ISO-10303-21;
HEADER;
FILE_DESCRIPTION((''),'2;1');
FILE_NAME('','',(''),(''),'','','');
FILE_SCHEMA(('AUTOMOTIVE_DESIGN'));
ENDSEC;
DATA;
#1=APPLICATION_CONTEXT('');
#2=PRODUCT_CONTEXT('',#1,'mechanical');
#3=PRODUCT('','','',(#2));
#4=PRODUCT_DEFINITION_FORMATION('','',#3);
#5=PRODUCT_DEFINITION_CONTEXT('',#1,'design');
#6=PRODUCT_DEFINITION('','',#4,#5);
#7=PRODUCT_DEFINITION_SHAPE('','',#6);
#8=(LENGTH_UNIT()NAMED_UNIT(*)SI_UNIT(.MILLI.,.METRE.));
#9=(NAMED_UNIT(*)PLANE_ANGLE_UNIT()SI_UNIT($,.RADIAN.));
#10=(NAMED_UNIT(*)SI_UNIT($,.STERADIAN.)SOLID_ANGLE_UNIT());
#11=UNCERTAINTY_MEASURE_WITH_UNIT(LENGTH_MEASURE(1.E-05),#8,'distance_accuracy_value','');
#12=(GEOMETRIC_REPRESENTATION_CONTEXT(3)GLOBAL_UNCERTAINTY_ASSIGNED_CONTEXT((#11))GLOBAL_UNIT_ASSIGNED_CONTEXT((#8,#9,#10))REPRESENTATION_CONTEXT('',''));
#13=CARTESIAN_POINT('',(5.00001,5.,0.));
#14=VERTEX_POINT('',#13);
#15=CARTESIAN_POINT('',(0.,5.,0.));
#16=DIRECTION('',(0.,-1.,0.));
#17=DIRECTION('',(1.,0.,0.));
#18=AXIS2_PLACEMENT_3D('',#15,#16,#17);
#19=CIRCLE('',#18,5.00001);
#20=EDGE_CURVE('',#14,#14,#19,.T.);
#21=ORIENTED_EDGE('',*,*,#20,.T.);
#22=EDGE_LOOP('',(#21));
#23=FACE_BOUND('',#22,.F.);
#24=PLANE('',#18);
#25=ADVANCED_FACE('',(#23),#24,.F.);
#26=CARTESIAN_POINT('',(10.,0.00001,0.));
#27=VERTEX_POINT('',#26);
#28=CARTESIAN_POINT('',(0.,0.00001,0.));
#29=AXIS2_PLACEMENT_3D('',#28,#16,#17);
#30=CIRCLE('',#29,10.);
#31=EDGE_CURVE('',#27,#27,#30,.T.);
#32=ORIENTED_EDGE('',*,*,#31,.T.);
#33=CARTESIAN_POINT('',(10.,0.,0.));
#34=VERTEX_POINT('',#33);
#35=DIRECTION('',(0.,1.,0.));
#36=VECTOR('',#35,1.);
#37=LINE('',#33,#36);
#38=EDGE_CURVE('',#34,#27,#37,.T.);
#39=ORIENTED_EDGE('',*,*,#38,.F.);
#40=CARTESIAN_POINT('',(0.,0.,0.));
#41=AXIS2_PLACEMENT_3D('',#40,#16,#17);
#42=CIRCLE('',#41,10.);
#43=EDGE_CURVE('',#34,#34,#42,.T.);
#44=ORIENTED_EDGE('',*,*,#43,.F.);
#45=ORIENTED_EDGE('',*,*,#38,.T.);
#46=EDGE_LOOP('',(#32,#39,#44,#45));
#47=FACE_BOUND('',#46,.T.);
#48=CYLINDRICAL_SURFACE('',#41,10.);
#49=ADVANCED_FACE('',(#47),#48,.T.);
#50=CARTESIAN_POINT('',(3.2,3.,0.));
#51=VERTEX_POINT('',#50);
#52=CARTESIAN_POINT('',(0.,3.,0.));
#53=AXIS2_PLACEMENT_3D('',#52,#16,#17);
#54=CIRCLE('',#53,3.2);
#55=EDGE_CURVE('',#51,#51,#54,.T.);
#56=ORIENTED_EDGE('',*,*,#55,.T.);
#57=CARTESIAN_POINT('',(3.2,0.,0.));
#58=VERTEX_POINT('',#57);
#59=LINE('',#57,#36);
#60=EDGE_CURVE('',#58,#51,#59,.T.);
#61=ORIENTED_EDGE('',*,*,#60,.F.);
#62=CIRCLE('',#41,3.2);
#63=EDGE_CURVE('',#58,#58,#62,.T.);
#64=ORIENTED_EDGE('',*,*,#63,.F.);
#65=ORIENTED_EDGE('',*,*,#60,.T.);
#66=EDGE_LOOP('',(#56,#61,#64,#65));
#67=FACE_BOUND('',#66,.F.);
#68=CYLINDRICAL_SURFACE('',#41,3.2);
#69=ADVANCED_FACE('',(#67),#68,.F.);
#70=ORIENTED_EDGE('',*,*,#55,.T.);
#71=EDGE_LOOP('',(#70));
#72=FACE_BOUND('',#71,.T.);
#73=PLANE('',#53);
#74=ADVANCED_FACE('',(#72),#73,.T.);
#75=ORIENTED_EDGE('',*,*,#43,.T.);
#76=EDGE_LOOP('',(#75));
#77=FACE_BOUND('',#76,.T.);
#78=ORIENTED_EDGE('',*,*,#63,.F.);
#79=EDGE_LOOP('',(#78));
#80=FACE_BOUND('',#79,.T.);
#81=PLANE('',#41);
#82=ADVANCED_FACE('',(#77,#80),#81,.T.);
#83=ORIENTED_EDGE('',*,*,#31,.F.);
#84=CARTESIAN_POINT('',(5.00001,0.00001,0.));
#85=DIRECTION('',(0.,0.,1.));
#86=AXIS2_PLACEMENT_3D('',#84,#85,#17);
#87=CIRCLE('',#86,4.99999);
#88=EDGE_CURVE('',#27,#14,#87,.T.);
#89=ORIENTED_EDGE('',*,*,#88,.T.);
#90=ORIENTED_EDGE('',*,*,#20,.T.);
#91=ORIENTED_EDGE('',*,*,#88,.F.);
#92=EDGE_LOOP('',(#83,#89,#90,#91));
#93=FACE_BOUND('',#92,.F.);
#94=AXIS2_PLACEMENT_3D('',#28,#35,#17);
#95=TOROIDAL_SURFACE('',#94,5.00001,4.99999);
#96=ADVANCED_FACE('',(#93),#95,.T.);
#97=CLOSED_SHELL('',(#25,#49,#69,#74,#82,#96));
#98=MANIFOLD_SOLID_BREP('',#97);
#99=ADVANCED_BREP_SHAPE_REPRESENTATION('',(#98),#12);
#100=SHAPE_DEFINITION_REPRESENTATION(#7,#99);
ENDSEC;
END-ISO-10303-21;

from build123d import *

# Parameters (mm, degrees)
F0_R     = 10
F1_DEPTH = 5
F2_R     = 4.99999
F3_R     = 3.2
F4_DEPTH = 3


# Not quite as in the source:
# - a fillet or chamfer is up to 0.001 mm smaller than in the source, because OpenCascade refuses the exact size


with BuildPart() as f1:
    # F0 (on Front) → F1 (new body)
    with BuildSketch(Plane.XZ):
        Circle(F0_R)
    extrude(amount=-F1_DEPTH)

    # F2 (radius 5 in the source; OpenCascade refuses exactly that, so slightly less here)
    f2_edges = [f1.edges().sort_by_distance(p)[0] for p in [
        (-10, 5, 0),
    ]]
    fillet(f2_edges, radius=F2_R)

    # F3 (on Front) → F4 (cut)
    with BuildSketch(Plane.XZ):
        Circle(F3_R)
    extrude(amount=-F4_DEPTH, mode=Mode.SUBTRACT)


solid = f1.part
